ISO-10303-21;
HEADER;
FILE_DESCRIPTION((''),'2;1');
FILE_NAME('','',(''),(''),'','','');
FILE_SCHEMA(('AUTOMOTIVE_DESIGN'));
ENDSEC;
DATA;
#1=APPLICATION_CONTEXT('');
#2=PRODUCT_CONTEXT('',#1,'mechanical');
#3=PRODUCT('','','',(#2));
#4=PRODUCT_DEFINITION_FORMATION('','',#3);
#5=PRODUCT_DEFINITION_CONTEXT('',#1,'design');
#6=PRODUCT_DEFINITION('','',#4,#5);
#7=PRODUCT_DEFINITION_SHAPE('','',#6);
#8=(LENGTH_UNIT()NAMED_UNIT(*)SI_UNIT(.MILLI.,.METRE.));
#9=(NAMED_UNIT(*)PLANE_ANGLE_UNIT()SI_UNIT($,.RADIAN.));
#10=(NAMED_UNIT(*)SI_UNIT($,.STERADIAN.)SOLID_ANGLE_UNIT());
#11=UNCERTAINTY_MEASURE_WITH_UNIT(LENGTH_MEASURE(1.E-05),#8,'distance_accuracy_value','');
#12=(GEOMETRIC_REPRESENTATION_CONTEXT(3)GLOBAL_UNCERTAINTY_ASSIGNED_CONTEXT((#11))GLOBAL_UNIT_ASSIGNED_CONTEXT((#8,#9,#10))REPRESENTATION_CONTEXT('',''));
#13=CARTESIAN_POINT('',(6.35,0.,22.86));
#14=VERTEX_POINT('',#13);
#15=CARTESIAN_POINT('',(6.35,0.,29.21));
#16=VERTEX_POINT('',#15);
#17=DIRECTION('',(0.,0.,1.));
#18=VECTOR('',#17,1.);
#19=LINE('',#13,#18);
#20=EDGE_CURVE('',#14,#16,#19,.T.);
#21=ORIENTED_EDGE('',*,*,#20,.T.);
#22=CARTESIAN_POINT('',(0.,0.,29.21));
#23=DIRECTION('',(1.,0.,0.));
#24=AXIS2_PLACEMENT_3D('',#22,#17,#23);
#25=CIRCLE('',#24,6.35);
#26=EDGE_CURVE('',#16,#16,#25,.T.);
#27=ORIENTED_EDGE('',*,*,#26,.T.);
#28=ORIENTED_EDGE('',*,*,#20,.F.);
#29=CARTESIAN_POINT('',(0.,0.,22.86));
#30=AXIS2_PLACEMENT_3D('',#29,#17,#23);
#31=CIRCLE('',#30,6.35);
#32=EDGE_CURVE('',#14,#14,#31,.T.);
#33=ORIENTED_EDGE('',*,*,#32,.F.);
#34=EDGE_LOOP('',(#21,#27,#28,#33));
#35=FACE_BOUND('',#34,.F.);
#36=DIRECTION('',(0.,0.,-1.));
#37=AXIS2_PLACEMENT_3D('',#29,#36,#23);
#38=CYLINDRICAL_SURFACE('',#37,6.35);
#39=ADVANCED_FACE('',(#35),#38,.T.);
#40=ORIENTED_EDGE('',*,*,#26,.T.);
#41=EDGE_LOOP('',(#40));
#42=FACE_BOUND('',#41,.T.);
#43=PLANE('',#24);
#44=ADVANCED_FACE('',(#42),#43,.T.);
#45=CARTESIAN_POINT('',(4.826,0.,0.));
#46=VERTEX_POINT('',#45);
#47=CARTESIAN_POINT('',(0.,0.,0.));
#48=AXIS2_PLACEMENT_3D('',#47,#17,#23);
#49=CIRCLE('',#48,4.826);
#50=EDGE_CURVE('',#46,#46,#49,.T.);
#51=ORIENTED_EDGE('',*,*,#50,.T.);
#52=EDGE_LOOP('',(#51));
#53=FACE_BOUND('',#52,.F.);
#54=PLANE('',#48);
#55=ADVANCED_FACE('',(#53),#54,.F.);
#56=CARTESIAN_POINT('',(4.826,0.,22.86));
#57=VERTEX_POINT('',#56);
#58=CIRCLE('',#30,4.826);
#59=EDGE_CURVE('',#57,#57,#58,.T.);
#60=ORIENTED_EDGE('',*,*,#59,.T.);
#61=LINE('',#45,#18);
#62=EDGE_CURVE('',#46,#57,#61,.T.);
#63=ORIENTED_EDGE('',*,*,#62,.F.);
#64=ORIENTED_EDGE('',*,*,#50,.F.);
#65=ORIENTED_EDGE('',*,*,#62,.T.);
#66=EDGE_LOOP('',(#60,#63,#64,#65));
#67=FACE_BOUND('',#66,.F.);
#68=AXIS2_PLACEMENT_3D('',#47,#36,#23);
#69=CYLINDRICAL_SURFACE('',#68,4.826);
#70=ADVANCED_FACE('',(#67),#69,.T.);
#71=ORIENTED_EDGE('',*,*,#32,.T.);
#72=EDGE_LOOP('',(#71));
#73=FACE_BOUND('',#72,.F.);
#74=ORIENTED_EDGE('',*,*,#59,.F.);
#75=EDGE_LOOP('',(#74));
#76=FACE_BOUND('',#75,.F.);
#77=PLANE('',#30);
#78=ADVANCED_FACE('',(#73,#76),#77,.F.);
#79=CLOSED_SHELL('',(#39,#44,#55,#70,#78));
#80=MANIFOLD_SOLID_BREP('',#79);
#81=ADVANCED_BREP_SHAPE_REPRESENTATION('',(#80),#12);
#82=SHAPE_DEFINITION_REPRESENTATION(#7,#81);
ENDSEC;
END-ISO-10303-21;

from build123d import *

# Parameters (mm, degrees)
F0_R     = 4.826
F1_DEPTH = 22.86
F2_R     = 6.35
F2_R_2   = 4.826
F3_DEPTH = 6.35
F4_DEPTH = 6.35


# Not quite as in the source:
# - a feature names something its author has since deleted; it is built from what else it names


with BuildPart() as f1:
    # F0 (on Top) → F1 (new body)
    with BuildSketch(Plane.XY):
        Circle(F0_R)
    extrude(amount=F1_DEPTH)

    # F2 (on face) → F3 (join)
    with BuildSketch(Plane.XY.offset(22.86)):
        Circle(F2_R)
        Circle(F2_R_2, mode=Mode.SUBTRACT)
    extrude(amount=F3_DEPTH)

    # F4 (add): a face of the model
    f4_faces = [f1.faces().sort_by_distance(p)[0] for p in [
        (0, 0, 22.86),
    ]]
    extrude(f4_faces, amount=F4_DEPTH)


solid = f1.part
